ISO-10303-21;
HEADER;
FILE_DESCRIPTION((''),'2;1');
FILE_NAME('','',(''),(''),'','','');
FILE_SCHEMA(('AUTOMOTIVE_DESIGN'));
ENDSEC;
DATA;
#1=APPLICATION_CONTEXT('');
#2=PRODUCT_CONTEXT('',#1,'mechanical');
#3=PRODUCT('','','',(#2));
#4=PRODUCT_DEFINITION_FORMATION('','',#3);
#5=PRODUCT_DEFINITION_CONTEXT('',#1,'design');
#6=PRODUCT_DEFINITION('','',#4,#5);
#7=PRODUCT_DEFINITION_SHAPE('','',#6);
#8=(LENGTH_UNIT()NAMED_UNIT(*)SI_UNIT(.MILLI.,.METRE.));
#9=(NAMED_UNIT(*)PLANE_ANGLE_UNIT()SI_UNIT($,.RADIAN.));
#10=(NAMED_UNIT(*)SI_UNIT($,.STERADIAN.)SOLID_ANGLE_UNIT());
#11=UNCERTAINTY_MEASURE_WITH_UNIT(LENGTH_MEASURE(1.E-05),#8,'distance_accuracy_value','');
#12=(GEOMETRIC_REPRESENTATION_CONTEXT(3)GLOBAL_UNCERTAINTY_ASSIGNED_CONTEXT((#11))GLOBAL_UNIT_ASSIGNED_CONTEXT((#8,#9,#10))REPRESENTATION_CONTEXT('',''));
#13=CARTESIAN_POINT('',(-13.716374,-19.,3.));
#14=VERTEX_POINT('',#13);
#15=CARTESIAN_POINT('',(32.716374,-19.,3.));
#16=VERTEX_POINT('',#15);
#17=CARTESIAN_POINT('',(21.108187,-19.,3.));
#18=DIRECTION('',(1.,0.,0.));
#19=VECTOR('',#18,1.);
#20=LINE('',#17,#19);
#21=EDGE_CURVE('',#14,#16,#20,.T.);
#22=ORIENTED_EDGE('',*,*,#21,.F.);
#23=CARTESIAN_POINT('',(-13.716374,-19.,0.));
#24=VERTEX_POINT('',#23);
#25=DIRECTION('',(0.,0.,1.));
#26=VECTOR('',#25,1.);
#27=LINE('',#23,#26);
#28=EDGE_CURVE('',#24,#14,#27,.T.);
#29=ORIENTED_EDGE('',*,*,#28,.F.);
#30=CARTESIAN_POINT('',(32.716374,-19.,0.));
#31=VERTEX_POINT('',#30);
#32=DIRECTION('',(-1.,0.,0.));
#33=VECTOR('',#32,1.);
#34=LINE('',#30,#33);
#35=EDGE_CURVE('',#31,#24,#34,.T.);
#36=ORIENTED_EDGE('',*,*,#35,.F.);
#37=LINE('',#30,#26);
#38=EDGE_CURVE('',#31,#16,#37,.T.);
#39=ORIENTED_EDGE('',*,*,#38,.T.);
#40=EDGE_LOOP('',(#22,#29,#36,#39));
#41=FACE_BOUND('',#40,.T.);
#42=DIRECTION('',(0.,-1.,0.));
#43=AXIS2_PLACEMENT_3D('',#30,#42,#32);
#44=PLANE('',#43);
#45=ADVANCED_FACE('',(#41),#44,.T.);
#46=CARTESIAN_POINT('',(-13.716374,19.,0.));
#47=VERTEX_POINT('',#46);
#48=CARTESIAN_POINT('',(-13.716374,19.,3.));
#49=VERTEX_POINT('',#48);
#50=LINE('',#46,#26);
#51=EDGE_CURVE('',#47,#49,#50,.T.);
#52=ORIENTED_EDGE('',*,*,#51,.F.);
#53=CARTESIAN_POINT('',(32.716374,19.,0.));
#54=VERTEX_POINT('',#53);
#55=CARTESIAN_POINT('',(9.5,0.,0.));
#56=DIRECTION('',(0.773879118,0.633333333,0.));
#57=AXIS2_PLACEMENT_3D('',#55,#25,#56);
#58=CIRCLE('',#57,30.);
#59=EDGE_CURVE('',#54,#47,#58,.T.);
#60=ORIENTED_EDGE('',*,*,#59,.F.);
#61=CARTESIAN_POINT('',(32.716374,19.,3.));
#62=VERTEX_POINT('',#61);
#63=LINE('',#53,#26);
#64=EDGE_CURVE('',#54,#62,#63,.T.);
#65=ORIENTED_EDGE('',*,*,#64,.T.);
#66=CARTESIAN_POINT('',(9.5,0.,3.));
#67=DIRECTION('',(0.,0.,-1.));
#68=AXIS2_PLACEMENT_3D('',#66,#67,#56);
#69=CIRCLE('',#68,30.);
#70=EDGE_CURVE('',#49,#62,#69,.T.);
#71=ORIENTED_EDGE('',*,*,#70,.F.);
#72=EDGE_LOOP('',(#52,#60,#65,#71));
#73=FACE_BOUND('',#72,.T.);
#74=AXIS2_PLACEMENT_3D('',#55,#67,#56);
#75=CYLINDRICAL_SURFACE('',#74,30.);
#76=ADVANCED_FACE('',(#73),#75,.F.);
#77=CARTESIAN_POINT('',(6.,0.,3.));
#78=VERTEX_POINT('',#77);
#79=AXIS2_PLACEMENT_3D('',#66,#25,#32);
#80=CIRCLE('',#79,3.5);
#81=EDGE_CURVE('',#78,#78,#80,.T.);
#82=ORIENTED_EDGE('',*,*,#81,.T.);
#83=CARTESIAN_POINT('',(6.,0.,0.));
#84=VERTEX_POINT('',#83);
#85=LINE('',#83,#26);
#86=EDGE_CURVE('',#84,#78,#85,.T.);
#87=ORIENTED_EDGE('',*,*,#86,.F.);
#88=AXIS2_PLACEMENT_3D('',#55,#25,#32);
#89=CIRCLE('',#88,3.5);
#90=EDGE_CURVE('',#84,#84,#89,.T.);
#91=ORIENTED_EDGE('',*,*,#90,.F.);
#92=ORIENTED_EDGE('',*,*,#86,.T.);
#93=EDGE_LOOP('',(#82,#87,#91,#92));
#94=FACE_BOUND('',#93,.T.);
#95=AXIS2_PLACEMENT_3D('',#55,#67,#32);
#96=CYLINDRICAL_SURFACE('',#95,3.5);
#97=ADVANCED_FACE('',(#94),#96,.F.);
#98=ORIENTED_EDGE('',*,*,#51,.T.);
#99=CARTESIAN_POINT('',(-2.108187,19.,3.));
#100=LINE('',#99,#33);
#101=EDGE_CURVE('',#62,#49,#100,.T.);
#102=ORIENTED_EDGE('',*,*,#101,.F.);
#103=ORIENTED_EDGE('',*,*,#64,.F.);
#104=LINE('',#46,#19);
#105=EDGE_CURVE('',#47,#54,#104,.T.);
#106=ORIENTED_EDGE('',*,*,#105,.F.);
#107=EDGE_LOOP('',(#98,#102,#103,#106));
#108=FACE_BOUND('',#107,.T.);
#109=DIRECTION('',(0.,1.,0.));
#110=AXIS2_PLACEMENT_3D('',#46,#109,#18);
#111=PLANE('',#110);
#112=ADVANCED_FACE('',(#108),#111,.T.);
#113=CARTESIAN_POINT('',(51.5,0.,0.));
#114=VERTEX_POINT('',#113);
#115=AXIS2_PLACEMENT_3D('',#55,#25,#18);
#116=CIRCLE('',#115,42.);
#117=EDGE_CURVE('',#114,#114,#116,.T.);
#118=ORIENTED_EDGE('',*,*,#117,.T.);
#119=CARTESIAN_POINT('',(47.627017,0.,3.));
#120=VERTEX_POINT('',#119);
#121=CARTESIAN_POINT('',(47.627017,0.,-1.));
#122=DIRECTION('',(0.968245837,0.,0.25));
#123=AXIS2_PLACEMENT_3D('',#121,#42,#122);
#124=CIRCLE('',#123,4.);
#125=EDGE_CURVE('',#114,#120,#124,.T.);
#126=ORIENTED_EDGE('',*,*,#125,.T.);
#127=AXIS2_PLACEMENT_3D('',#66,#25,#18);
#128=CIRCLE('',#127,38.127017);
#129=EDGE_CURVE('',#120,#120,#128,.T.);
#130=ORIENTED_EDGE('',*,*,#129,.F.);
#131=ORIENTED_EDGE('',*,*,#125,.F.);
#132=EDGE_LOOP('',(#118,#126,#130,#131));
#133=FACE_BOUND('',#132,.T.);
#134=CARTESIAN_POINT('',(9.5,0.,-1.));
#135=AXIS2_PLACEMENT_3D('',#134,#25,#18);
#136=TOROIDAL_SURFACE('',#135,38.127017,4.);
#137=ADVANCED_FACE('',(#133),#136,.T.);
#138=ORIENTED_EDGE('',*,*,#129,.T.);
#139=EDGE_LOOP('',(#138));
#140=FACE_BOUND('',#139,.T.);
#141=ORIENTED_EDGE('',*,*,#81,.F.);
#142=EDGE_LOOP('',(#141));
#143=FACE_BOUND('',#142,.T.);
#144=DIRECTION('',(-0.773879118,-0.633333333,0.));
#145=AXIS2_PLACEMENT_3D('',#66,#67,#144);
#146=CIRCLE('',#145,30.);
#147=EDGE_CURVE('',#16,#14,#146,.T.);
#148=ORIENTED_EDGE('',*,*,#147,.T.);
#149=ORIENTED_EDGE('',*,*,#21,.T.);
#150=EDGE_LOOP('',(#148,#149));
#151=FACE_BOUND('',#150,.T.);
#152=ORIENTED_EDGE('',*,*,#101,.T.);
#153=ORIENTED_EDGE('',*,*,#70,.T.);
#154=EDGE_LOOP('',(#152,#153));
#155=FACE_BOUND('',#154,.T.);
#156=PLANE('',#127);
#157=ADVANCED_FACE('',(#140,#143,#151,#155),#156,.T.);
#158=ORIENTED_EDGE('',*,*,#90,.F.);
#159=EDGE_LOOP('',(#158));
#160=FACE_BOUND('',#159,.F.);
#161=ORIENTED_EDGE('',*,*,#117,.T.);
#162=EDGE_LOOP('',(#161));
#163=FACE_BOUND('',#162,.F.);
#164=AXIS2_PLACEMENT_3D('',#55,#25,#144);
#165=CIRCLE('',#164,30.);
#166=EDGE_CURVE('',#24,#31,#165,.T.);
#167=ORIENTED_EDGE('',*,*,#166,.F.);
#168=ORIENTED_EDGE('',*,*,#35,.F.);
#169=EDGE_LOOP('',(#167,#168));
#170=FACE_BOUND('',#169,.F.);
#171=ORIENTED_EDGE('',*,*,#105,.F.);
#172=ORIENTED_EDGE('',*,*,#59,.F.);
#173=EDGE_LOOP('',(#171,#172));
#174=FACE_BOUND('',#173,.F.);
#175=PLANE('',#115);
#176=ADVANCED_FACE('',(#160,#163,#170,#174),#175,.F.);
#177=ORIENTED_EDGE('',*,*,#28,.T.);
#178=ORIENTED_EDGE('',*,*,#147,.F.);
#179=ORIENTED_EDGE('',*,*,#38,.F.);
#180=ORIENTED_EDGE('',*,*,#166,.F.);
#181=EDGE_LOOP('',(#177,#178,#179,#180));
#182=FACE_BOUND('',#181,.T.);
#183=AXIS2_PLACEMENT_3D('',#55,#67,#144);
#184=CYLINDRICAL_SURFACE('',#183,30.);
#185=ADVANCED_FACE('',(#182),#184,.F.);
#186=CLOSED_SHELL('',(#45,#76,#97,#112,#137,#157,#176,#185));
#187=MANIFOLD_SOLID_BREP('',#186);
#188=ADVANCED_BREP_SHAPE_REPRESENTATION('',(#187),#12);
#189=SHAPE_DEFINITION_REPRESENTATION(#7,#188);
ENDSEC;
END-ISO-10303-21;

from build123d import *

# Parameters (mm, degrees)
F1_R     = 42
F2_DEPTH = 3
F3_DEPTH = 3
F6_DEPTH = 30


# Not quite as in the source:
# - a fillet or chamfer that OpenCascade refuses, or shapes differently, is made with other operations: its cross-section is extruded or revolved along the edge and cut away or added


with BuildPart() as f2:
    # F1 (on Top) → F2 (new body)
    with BuildSketch(Plane.XY):
        with Locations((9.5, 0)):
            Circle(F1_R)
    extrude(amount=F2_DEPTH)

    # F0 (on Top) → F3 (cut)
    with BuildSketch(Plane.XY):
        with BuildLine():
            Line((6, 0), (13, 0))
            ThreePointArc((13, 0), (9.5, 3.5), (6, 0))
        make_face()
        with BuildLine():
            ThreePointArc((6, 0), (9.5, -3.5), (13, 0))
            Line((13, 0), (6, 0))
        make_face()
    extrude(amount=F3_DEPTH, mode=Mode.SUBTRACT)

    # F4: fillet of radius 4 on 1 edges, made by hand

    # F4_s1 → F4_t2 (revolve, cut)
    with BuildSketch(Plane.XZ):
        with BuildLine():
            ThreePointArc((51.5, 0), (50.0765063966, 2.1622776602), (47.6270166538, 3))
            Line((47.6270166538, 3), (51.5, 3))
            Line((51.5, 3), (51.5, 0))
        make_face()
    revolve(axis=Axis((9.5, 0, 3), (0, 0, 1)), mode=Mode.SUBTRACT)

    # F5 (on face) → F6 (cut)
    with BuildSketch(Plane.XY):
        with BuildLine():
            Line((-13.7163735325, 19), (32.7163735325, 19))
            ThreePointArc((32.7163735325, 19), (9.5, 30), (-13.7163735325, 19))
        make_face()
        with BuildLine():
            Line((32.7163735325, -19), (-13.7163735325, -19))
            ThreePointArc((-13.7163735325, -19), (9.5, -30), (32.7163735325, -19))
        make_face()
    extrude(amount=F6_DEPTH, mode=Mode.SUBTRACT)


solid = f2.part
